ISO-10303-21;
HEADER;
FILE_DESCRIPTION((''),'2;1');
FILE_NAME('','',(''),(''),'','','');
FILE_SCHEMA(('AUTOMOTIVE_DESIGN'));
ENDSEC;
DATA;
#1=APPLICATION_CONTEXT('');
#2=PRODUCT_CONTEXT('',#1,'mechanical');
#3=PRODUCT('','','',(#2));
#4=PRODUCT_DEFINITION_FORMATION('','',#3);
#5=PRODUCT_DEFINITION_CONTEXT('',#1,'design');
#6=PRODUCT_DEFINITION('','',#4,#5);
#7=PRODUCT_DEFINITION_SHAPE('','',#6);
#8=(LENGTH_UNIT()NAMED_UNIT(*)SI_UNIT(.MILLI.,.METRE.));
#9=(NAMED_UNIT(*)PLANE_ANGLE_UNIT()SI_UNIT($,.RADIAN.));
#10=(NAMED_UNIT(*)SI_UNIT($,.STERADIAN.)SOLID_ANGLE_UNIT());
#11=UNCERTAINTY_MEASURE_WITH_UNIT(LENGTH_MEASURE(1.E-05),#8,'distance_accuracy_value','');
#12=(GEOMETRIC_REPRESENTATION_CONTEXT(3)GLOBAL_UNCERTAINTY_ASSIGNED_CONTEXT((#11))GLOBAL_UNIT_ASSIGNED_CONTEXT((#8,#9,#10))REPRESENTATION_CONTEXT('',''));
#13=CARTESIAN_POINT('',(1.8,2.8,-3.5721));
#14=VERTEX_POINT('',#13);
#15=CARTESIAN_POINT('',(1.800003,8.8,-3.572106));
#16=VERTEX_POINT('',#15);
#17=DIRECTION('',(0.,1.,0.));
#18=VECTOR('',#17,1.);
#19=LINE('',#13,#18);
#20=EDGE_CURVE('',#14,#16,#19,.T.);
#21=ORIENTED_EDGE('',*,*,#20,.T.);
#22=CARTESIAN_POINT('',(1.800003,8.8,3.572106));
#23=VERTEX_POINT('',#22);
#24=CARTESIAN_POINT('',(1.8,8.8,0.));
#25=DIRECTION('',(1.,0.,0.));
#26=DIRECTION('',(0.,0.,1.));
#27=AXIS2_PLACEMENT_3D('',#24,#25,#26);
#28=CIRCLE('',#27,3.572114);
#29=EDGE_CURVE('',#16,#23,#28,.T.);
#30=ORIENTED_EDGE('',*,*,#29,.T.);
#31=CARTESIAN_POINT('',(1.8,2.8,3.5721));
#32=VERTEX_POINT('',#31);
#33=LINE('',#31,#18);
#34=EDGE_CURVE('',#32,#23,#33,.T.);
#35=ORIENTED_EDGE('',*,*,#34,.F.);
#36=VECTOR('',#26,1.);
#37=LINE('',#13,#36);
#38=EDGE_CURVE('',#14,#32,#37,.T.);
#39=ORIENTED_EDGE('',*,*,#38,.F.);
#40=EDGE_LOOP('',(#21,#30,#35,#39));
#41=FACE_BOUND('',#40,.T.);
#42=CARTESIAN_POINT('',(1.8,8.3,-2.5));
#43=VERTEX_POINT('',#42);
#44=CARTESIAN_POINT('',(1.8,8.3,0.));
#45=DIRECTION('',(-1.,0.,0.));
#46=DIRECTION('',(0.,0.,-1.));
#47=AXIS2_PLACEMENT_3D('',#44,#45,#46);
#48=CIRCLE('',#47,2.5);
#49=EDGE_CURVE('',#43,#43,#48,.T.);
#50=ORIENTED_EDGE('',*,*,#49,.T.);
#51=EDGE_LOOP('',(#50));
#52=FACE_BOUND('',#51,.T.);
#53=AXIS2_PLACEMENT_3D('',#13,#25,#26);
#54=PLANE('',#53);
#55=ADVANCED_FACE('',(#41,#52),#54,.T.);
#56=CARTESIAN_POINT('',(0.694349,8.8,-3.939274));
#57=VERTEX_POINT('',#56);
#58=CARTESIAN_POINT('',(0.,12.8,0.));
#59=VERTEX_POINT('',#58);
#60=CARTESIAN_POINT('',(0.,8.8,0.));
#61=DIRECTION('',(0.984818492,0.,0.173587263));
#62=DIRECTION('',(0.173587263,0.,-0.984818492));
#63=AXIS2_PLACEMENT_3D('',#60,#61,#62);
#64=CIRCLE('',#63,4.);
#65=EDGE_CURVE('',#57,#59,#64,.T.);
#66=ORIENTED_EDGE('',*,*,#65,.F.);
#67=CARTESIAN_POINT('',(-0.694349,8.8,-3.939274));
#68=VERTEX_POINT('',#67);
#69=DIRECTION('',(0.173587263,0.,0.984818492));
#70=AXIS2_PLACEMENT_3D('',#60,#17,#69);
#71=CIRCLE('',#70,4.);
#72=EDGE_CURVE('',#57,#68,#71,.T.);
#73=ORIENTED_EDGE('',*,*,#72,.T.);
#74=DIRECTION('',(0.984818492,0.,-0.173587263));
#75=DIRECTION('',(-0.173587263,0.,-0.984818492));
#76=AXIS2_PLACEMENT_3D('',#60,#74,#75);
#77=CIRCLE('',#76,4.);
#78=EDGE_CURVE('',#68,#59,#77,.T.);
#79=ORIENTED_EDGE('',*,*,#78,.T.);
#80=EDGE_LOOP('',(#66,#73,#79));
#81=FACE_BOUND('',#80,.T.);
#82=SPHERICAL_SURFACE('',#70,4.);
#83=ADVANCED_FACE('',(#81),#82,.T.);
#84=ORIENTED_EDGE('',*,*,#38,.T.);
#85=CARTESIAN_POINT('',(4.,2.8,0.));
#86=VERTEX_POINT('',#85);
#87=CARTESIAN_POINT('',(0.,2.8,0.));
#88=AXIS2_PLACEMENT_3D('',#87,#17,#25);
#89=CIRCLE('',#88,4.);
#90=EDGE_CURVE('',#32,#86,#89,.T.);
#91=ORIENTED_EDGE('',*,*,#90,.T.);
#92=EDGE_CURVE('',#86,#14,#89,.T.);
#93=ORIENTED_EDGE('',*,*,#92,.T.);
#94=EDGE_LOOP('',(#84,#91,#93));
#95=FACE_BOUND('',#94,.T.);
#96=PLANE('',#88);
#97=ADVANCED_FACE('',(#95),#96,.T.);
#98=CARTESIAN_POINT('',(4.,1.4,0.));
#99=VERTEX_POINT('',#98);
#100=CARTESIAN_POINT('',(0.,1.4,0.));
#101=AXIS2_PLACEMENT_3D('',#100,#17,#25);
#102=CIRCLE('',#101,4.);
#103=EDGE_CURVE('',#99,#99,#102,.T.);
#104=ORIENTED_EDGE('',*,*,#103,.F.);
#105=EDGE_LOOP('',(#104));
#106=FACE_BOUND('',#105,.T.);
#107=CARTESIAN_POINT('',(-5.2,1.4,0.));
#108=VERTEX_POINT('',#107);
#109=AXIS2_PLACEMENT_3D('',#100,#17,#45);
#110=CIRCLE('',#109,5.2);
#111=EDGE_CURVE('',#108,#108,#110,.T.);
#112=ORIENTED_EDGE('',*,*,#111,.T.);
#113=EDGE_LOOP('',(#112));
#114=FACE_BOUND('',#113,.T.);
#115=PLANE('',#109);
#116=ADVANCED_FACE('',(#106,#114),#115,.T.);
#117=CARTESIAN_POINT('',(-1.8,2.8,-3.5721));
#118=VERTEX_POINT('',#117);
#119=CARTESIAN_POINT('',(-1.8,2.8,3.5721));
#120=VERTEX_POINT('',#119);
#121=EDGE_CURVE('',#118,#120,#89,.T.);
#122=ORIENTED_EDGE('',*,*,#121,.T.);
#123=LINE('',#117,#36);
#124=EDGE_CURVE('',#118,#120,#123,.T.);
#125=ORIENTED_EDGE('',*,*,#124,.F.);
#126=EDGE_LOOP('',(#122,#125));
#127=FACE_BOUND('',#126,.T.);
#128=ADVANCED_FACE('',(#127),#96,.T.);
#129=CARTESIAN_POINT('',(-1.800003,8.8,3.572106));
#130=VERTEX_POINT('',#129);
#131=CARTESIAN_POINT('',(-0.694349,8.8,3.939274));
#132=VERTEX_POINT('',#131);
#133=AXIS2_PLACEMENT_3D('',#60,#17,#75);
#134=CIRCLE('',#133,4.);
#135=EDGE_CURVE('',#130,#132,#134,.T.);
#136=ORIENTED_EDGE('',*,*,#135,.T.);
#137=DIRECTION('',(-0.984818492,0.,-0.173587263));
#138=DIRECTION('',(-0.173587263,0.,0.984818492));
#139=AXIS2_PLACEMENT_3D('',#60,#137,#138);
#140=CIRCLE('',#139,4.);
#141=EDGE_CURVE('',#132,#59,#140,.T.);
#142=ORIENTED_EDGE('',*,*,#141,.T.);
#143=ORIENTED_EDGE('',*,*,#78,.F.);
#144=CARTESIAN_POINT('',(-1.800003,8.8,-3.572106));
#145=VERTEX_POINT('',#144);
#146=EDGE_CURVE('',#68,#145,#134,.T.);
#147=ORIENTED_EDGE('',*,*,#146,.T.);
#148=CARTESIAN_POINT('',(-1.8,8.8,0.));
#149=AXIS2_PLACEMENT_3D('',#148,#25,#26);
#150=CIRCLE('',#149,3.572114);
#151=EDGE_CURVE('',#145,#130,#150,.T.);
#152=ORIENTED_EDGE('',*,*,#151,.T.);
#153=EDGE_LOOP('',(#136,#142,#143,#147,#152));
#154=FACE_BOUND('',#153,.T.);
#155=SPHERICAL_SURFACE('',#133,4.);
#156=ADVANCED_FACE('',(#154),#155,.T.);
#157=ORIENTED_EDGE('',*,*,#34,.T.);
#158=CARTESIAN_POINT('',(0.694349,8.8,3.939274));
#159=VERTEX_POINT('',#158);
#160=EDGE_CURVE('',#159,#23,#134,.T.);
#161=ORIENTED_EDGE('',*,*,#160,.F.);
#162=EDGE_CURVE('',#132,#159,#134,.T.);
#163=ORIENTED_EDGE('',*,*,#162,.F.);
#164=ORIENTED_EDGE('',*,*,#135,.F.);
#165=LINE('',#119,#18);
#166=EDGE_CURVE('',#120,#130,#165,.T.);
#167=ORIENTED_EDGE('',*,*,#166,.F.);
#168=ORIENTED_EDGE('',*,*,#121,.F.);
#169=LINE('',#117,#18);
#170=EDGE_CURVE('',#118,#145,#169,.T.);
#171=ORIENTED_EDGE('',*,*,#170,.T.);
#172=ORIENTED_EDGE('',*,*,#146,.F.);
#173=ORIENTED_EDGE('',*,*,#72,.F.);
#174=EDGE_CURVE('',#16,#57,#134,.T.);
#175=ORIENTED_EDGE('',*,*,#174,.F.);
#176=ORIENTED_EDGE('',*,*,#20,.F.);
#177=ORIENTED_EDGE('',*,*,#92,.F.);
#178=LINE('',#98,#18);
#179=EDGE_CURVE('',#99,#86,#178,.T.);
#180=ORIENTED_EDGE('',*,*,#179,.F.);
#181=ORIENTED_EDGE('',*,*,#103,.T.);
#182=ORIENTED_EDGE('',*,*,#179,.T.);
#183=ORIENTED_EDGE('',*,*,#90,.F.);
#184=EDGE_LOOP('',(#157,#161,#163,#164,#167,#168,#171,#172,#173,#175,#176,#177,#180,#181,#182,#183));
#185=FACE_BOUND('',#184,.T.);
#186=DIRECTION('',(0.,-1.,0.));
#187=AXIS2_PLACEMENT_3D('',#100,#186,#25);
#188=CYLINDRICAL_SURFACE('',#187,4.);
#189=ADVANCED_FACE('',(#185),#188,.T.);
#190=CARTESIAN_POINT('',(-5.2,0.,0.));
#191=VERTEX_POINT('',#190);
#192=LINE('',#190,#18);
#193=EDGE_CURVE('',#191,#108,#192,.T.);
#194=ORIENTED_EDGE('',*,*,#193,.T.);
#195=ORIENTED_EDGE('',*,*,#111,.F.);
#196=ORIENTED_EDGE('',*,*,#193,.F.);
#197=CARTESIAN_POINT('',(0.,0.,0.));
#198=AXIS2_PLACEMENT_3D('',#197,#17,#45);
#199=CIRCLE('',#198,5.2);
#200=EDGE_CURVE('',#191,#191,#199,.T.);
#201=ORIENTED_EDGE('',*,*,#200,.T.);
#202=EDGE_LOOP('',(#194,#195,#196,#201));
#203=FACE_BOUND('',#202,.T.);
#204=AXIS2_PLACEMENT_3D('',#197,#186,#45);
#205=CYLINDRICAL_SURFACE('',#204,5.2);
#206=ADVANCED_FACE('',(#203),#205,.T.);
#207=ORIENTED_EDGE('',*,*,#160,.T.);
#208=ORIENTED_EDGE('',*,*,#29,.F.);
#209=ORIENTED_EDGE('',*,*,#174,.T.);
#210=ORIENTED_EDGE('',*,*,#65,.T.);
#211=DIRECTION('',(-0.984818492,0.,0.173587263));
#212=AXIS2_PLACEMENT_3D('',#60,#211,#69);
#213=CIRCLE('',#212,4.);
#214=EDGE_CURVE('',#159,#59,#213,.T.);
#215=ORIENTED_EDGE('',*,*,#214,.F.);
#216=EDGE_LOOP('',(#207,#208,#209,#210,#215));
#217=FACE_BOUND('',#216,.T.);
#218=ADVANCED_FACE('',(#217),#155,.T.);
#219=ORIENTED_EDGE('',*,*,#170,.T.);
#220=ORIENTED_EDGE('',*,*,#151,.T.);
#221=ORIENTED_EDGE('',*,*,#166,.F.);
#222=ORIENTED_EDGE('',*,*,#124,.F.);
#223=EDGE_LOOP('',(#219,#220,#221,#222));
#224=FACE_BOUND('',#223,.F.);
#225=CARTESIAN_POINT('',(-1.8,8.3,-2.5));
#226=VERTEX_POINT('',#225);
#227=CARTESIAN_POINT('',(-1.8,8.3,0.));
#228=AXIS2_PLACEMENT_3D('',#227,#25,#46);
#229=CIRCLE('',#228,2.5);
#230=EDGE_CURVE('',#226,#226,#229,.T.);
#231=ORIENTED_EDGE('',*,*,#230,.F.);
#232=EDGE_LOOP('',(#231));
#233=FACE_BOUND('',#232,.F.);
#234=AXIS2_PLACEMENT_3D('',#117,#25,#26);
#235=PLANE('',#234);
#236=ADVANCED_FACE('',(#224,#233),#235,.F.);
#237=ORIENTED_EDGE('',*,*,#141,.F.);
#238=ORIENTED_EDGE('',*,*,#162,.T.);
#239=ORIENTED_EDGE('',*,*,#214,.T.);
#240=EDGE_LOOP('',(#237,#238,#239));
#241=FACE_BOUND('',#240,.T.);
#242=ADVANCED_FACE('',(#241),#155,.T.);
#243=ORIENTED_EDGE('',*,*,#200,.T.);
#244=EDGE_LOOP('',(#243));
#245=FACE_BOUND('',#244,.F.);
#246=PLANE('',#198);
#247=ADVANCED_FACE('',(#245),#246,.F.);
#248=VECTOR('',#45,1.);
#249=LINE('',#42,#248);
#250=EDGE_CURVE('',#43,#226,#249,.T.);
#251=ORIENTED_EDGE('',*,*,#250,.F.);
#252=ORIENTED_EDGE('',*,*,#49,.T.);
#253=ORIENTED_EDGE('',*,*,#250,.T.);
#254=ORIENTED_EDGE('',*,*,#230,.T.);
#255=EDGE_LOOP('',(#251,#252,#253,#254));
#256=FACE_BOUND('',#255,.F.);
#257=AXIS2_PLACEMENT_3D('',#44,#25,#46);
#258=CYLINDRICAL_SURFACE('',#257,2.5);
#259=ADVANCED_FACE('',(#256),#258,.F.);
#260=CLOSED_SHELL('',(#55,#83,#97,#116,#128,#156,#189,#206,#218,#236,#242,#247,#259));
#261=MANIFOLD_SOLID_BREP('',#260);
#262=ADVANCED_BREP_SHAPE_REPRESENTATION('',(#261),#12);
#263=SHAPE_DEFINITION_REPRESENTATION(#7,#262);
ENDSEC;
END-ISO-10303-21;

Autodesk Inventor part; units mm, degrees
ref_plane "YZ Plane" through (0, 0, 0) normal (1, 0, 0) x (0, 1, 0)
ref_plane "XZ Plane" through (0, 0, 0) normal (0, 1, 0) x (-1, 0, 0)
ref_plane "XY Plane" through (0, 0, 0) normal (0, 0, 1) x (1, 0, 0)
sketch "Sketch1" plane through (0, 0, 0) normal (0, 1, 0) x (-1, 0, 0)
  circle A0 centre (0, 0) radius 5.2
  dimension "d0" = 10.4
extrude "Extrusion1" add sketch "Sketch1" along normal blind 1.4
sketch "Sketch2" plane through (0, 1.4, 0) normal (0, 1, 0) x (1, 0, 0)
  circle A0 centre (0, 0) radius 5.2 projected
  circle A1 centre (0, 0) radius 4
  dimension "d3" = 8
extrude "Extrusion2" add sketch "Sketch2" along normal blind 1.4 contours A1
sketch "Sketch3" plane through (0, 2.8, 0) normal (0, 1, 0) x (1, 0, 0)
  circle A0 centre (0, 0) radius 4 projected
  line L0 (-1.8, 3.5721) -> (-1.8, -3.5721)
  line L1 (1.8, 3.5721) -> (1.8, -3.5721)
  arc A1 (-1.8, -3.5721) -> (1.8, -3.5721) centre (0, 0) ccw
  arc A2 (1.8, 3.5721) -> (-1.8, 3.5721) centre (0, 0) ccw
extrude "Extrusion3" add sketch "Sketch3" along normal blind 10 contours L1 A0 L0
sketch "Sketch4" plane through (1.8, 2.8, 3.5721) normal (1, 0, 0) x (0, 0, -1)
  line L0 (0, 10) -> (7.1442, 10) projected
  line L1 (0, 0) -> (0, 10) projected
  line L2 (3.5721, 10) -> (3.5721, 5.5)
  circle A0 centre (3.5721, 5.5) radius 2.5
  point P0 (3.5721, -2.8)
  dimension "d9" = 4.5
  dimension "d10" = 5
extrude "Extrusion4" cut sketch "Sketch4" against normal blind 10
fillet "Fillet1" radius 4 2 edges at (0, 12.8, 4) (0, 12.8, -4)
properties part number "pruzinauvhyt"
